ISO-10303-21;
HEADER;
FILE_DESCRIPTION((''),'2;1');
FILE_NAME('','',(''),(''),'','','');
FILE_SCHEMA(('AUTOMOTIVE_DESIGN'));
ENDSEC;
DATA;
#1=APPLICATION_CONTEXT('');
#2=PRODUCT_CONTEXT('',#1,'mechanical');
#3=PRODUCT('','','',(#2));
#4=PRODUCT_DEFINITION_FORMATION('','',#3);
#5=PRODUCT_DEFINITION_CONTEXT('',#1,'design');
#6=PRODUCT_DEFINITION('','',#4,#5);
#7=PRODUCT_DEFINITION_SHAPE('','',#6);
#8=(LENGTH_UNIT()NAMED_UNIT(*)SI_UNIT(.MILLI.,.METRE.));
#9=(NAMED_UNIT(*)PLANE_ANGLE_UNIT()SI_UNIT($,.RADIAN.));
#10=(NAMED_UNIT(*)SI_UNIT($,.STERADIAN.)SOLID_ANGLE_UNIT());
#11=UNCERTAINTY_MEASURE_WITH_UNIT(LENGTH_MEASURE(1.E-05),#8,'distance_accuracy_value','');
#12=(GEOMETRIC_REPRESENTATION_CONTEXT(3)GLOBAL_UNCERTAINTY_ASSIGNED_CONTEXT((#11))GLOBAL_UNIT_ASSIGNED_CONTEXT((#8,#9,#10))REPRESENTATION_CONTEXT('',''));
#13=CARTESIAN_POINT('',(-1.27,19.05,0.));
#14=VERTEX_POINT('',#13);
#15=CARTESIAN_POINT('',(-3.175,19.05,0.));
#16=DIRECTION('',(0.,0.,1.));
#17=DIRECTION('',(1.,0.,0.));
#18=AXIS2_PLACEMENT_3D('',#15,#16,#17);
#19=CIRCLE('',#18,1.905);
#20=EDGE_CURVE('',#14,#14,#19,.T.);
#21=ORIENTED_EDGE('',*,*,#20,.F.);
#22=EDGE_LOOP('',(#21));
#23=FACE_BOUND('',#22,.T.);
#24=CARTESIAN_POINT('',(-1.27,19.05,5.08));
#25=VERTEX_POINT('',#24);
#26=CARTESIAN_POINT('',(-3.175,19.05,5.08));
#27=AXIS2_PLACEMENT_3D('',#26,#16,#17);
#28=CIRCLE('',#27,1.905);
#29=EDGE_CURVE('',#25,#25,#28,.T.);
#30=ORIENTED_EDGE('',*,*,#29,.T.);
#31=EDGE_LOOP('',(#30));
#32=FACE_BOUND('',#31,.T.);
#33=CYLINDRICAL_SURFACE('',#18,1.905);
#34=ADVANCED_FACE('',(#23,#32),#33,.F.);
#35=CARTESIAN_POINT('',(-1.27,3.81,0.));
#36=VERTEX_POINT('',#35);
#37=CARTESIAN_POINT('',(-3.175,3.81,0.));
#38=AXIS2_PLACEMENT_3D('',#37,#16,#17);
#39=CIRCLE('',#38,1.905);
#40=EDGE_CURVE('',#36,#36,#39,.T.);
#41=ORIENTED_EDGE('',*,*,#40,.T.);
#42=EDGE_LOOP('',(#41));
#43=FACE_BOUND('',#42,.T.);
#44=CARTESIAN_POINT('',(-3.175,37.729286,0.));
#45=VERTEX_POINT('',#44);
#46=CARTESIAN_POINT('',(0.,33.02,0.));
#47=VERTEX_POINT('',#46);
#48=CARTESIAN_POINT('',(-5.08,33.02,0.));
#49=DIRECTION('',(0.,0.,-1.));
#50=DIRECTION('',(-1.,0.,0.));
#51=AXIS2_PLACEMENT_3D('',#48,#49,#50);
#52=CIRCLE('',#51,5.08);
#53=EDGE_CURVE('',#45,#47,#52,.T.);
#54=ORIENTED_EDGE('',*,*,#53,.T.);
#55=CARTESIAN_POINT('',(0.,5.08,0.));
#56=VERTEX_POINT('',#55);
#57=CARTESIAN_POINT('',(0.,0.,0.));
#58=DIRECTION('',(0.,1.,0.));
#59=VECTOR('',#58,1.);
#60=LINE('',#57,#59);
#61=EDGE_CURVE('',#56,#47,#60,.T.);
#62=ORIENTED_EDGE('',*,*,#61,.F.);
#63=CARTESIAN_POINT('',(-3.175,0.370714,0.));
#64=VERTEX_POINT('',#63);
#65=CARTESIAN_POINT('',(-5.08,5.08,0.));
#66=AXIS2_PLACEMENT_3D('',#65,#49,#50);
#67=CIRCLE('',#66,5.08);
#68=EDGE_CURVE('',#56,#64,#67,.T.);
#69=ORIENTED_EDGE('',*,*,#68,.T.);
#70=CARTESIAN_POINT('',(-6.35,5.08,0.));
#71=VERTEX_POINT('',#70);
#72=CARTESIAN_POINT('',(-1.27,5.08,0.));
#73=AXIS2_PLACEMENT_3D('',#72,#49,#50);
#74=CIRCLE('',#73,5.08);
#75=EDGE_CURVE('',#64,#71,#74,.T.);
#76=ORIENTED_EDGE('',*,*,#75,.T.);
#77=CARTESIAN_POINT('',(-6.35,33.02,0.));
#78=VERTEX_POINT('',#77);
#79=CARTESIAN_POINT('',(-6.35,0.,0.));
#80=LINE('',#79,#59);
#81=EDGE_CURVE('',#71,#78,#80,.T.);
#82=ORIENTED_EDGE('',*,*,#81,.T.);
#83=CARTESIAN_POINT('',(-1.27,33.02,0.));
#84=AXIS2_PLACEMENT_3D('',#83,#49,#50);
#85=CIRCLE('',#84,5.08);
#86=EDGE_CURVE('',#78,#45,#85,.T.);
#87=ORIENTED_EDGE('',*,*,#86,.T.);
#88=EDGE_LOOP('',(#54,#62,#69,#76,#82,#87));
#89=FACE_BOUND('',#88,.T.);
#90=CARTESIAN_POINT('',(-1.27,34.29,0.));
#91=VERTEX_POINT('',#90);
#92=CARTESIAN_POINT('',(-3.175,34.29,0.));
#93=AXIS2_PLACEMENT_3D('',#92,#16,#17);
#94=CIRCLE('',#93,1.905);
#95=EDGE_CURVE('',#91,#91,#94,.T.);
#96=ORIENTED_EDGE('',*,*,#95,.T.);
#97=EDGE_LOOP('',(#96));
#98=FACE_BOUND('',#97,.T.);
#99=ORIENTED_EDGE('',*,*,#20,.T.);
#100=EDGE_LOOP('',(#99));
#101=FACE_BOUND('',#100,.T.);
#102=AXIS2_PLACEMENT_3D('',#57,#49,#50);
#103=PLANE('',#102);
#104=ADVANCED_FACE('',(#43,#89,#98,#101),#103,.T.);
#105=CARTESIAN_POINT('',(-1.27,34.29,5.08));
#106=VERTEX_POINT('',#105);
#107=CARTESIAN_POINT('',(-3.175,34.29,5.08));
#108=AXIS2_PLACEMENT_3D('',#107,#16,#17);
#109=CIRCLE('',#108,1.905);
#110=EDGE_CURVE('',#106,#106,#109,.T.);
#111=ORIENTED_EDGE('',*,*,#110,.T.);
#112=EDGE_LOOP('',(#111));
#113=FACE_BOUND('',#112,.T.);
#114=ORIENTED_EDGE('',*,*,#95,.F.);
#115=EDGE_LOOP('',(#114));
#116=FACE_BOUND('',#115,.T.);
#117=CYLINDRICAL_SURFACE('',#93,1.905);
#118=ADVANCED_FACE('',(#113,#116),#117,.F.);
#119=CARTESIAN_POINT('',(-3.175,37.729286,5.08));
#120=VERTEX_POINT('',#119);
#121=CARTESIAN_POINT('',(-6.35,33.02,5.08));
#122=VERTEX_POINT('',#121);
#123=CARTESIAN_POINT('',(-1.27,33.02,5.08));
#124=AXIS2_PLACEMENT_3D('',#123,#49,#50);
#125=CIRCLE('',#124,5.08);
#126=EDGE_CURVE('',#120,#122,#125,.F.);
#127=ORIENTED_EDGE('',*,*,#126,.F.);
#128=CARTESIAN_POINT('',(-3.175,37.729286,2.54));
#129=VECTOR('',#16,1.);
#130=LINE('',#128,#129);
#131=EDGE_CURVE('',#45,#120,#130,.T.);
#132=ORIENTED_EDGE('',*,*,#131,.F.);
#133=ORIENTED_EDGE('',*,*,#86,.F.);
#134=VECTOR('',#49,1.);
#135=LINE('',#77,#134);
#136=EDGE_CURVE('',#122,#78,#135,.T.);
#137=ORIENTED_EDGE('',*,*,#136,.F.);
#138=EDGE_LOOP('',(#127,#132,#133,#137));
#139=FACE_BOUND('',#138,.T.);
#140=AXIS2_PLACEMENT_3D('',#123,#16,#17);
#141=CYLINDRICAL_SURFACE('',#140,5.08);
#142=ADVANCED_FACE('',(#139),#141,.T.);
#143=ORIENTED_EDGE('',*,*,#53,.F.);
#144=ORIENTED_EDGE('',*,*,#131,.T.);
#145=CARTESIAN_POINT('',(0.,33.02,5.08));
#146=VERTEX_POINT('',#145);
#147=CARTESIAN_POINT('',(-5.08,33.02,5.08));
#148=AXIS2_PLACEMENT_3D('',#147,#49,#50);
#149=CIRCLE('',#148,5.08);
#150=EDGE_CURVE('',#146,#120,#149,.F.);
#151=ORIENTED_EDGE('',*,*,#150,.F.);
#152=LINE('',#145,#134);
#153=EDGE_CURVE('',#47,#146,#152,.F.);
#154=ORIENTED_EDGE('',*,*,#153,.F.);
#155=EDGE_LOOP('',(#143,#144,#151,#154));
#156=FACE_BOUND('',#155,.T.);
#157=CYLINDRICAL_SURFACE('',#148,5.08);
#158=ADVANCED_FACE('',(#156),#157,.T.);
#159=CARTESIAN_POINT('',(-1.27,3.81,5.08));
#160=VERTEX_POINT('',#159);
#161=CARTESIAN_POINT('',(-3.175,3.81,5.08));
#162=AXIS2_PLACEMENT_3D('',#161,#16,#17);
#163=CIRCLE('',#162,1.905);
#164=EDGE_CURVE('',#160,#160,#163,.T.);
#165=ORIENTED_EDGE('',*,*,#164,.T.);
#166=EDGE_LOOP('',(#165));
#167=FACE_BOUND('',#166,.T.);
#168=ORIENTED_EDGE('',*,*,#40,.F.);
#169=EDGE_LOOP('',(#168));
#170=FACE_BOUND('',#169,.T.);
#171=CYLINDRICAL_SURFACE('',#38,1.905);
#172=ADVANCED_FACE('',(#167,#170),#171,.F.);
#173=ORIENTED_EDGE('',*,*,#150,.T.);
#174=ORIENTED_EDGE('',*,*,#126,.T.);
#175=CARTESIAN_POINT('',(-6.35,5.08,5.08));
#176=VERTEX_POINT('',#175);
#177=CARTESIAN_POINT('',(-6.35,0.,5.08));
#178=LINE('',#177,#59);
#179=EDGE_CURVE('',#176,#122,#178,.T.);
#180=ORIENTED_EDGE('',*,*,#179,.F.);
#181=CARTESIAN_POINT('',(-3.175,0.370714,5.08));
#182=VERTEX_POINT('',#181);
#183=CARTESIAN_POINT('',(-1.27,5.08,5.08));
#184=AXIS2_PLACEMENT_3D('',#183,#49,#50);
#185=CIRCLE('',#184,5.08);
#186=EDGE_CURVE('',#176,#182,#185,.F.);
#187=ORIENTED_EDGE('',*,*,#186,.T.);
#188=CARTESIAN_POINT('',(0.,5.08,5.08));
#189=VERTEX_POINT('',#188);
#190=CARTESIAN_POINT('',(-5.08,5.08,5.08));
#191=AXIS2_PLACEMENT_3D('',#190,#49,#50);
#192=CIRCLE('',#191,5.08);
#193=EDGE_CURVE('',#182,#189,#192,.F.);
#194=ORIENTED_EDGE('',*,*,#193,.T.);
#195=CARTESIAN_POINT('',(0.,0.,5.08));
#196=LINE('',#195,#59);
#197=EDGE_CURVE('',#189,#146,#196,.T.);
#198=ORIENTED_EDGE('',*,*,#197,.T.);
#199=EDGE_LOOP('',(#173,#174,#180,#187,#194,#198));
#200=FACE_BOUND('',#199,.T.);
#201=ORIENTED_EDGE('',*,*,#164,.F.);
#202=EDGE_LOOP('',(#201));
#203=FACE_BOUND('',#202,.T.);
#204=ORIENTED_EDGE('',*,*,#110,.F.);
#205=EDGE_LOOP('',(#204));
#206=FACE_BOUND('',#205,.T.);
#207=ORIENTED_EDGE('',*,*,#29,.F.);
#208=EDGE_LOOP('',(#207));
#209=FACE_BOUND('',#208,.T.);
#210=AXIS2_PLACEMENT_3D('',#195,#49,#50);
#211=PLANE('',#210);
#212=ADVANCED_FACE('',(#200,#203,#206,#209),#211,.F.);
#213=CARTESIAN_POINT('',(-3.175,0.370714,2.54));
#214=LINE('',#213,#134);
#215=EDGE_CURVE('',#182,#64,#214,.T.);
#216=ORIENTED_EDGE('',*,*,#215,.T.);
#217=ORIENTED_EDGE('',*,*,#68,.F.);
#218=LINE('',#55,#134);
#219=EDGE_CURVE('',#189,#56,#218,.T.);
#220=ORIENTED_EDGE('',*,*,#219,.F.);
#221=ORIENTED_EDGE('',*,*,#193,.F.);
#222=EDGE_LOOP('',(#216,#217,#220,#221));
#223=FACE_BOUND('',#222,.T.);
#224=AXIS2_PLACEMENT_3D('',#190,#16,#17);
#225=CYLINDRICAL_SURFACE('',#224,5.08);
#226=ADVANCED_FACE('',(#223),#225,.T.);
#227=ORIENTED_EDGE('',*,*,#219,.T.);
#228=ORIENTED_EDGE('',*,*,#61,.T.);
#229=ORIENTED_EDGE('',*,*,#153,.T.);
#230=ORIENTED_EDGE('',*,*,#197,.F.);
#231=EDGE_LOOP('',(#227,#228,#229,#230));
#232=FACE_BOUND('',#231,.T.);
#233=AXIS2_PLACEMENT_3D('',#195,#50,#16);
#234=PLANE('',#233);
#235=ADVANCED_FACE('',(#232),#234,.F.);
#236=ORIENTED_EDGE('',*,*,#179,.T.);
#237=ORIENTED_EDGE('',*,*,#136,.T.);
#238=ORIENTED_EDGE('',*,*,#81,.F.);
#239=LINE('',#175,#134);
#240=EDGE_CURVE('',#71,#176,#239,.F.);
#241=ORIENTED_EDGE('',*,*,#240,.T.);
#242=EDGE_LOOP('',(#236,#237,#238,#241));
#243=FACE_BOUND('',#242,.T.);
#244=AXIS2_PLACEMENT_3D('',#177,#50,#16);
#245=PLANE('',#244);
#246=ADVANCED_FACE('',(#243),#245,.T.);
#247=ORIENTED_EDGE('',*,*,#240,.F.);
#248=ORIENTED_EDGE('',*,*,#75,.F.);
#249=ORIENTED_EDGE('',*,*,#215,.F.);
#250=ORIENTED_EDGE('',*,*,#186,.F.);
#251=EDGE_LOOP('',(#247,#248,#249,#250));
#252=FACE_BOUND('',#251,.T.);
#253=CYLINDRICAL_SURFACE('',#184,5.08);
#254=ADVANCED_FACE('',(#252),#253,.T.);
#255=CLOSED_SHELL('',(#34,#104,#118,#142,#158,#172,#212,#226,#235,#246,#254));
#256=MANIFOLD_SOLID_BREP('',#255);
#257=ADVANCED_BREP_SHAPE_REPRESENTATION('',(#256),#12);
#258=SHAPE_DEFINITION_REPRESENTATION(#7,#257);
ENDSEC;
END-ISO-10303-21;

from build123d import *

# Parameters (mm, degrees)
SKETCH3_W           = 38.1
SKETCH3_H           = 6.35
BOSS_EXTRUDE1_DEPTH = 5.08
SKETCH4_R           = 1.905
CUT_EXTRUDE1_DEPTH  = 39.958168591
FILLET2_R           = 5.08


with BuildPart() as part:
    # Sketch3 → Boss-Extrude1 (new body)
    with BuildSketch(Plane(origin=(0, 0, 0), x_dir=(0, 1, 0), z_dir=(0, 0, 1))):
        with Locations((19.05, 3.175)):
            Rectangle(SKETCH3_W, SKETCH3_H)
    extrude(amount=BOSS_EXTRUDE1_DEPTH)

    # Sketch4 → Cut-Extrude1 (cut, through all)
    with BuildSketch(Plane(origin=(0, 0, 5.08), x_dir=(0, -1, 0), z_dir=(0, 0, 1))):
        with Locations(Location((-3.81, -3.175, 0), (0, 0, 90))):
            Circle(SKETCH4_R)
        with Locations(Location((-19.05, -3.175, 0), (0, 0, 90))):
            Circle(SKETCH4_R)
        with Locations(Location((-34.29, -3.175, 0), (0, 0, 90))):
            Circle(SKETCH4_R)
    extrude(amount=-CUT_EXTRUDE1_DEPTH, mode=Mode.SUBTRACT)

    # Fillet2
    # the kernel refuses this fillet: 5.08 mm, written as the material it takes off along each edge
    with BuildSketch(Plane(origin=(0, 38.1, -12.7), x_dir=(0, -1, 0), z_dir=(0, 0, 1)), Plane(origin=(-6.35, 38.1, -12.7), x_dir=(1, 0, 0), z_dir=(0, 0, 1))) as fillet2_piece_1:
        with BuildLine():
            CenterArc((FILLET2_R, -FILLET2_R), FILLET2_R, 90, 90)
            Line((0, -FILLET2_R), (0, 0))
            Line((0, 0), (FILLET2_R, 0))
        make_face()
    extrude(amount=30.48, mode=Mode.SUBTRACT)
    with BuildSketch(Plane(origin=(0, 0, -12.7), x_dir=(0, 1, 0), z_dir=(0, 0, 1)), Plane(origin=(-6.35, 0, -12.7), x_dir=(1, 0, 0), z_dir=(0, 0, 1))) as fillet2_piece_2:
        with BuildLine():
            CenterArc((FILLET2_R, FILLET2_R), FILLET2_R, 180, 90)
            Line((0, FILLET2_R), (0, 0))
            Line((0, 0), (FILLET2_R, 0))
        make_face()
    extrude(amount=30.48, mode=Mode.SUBTRACT)


solid = part.part
